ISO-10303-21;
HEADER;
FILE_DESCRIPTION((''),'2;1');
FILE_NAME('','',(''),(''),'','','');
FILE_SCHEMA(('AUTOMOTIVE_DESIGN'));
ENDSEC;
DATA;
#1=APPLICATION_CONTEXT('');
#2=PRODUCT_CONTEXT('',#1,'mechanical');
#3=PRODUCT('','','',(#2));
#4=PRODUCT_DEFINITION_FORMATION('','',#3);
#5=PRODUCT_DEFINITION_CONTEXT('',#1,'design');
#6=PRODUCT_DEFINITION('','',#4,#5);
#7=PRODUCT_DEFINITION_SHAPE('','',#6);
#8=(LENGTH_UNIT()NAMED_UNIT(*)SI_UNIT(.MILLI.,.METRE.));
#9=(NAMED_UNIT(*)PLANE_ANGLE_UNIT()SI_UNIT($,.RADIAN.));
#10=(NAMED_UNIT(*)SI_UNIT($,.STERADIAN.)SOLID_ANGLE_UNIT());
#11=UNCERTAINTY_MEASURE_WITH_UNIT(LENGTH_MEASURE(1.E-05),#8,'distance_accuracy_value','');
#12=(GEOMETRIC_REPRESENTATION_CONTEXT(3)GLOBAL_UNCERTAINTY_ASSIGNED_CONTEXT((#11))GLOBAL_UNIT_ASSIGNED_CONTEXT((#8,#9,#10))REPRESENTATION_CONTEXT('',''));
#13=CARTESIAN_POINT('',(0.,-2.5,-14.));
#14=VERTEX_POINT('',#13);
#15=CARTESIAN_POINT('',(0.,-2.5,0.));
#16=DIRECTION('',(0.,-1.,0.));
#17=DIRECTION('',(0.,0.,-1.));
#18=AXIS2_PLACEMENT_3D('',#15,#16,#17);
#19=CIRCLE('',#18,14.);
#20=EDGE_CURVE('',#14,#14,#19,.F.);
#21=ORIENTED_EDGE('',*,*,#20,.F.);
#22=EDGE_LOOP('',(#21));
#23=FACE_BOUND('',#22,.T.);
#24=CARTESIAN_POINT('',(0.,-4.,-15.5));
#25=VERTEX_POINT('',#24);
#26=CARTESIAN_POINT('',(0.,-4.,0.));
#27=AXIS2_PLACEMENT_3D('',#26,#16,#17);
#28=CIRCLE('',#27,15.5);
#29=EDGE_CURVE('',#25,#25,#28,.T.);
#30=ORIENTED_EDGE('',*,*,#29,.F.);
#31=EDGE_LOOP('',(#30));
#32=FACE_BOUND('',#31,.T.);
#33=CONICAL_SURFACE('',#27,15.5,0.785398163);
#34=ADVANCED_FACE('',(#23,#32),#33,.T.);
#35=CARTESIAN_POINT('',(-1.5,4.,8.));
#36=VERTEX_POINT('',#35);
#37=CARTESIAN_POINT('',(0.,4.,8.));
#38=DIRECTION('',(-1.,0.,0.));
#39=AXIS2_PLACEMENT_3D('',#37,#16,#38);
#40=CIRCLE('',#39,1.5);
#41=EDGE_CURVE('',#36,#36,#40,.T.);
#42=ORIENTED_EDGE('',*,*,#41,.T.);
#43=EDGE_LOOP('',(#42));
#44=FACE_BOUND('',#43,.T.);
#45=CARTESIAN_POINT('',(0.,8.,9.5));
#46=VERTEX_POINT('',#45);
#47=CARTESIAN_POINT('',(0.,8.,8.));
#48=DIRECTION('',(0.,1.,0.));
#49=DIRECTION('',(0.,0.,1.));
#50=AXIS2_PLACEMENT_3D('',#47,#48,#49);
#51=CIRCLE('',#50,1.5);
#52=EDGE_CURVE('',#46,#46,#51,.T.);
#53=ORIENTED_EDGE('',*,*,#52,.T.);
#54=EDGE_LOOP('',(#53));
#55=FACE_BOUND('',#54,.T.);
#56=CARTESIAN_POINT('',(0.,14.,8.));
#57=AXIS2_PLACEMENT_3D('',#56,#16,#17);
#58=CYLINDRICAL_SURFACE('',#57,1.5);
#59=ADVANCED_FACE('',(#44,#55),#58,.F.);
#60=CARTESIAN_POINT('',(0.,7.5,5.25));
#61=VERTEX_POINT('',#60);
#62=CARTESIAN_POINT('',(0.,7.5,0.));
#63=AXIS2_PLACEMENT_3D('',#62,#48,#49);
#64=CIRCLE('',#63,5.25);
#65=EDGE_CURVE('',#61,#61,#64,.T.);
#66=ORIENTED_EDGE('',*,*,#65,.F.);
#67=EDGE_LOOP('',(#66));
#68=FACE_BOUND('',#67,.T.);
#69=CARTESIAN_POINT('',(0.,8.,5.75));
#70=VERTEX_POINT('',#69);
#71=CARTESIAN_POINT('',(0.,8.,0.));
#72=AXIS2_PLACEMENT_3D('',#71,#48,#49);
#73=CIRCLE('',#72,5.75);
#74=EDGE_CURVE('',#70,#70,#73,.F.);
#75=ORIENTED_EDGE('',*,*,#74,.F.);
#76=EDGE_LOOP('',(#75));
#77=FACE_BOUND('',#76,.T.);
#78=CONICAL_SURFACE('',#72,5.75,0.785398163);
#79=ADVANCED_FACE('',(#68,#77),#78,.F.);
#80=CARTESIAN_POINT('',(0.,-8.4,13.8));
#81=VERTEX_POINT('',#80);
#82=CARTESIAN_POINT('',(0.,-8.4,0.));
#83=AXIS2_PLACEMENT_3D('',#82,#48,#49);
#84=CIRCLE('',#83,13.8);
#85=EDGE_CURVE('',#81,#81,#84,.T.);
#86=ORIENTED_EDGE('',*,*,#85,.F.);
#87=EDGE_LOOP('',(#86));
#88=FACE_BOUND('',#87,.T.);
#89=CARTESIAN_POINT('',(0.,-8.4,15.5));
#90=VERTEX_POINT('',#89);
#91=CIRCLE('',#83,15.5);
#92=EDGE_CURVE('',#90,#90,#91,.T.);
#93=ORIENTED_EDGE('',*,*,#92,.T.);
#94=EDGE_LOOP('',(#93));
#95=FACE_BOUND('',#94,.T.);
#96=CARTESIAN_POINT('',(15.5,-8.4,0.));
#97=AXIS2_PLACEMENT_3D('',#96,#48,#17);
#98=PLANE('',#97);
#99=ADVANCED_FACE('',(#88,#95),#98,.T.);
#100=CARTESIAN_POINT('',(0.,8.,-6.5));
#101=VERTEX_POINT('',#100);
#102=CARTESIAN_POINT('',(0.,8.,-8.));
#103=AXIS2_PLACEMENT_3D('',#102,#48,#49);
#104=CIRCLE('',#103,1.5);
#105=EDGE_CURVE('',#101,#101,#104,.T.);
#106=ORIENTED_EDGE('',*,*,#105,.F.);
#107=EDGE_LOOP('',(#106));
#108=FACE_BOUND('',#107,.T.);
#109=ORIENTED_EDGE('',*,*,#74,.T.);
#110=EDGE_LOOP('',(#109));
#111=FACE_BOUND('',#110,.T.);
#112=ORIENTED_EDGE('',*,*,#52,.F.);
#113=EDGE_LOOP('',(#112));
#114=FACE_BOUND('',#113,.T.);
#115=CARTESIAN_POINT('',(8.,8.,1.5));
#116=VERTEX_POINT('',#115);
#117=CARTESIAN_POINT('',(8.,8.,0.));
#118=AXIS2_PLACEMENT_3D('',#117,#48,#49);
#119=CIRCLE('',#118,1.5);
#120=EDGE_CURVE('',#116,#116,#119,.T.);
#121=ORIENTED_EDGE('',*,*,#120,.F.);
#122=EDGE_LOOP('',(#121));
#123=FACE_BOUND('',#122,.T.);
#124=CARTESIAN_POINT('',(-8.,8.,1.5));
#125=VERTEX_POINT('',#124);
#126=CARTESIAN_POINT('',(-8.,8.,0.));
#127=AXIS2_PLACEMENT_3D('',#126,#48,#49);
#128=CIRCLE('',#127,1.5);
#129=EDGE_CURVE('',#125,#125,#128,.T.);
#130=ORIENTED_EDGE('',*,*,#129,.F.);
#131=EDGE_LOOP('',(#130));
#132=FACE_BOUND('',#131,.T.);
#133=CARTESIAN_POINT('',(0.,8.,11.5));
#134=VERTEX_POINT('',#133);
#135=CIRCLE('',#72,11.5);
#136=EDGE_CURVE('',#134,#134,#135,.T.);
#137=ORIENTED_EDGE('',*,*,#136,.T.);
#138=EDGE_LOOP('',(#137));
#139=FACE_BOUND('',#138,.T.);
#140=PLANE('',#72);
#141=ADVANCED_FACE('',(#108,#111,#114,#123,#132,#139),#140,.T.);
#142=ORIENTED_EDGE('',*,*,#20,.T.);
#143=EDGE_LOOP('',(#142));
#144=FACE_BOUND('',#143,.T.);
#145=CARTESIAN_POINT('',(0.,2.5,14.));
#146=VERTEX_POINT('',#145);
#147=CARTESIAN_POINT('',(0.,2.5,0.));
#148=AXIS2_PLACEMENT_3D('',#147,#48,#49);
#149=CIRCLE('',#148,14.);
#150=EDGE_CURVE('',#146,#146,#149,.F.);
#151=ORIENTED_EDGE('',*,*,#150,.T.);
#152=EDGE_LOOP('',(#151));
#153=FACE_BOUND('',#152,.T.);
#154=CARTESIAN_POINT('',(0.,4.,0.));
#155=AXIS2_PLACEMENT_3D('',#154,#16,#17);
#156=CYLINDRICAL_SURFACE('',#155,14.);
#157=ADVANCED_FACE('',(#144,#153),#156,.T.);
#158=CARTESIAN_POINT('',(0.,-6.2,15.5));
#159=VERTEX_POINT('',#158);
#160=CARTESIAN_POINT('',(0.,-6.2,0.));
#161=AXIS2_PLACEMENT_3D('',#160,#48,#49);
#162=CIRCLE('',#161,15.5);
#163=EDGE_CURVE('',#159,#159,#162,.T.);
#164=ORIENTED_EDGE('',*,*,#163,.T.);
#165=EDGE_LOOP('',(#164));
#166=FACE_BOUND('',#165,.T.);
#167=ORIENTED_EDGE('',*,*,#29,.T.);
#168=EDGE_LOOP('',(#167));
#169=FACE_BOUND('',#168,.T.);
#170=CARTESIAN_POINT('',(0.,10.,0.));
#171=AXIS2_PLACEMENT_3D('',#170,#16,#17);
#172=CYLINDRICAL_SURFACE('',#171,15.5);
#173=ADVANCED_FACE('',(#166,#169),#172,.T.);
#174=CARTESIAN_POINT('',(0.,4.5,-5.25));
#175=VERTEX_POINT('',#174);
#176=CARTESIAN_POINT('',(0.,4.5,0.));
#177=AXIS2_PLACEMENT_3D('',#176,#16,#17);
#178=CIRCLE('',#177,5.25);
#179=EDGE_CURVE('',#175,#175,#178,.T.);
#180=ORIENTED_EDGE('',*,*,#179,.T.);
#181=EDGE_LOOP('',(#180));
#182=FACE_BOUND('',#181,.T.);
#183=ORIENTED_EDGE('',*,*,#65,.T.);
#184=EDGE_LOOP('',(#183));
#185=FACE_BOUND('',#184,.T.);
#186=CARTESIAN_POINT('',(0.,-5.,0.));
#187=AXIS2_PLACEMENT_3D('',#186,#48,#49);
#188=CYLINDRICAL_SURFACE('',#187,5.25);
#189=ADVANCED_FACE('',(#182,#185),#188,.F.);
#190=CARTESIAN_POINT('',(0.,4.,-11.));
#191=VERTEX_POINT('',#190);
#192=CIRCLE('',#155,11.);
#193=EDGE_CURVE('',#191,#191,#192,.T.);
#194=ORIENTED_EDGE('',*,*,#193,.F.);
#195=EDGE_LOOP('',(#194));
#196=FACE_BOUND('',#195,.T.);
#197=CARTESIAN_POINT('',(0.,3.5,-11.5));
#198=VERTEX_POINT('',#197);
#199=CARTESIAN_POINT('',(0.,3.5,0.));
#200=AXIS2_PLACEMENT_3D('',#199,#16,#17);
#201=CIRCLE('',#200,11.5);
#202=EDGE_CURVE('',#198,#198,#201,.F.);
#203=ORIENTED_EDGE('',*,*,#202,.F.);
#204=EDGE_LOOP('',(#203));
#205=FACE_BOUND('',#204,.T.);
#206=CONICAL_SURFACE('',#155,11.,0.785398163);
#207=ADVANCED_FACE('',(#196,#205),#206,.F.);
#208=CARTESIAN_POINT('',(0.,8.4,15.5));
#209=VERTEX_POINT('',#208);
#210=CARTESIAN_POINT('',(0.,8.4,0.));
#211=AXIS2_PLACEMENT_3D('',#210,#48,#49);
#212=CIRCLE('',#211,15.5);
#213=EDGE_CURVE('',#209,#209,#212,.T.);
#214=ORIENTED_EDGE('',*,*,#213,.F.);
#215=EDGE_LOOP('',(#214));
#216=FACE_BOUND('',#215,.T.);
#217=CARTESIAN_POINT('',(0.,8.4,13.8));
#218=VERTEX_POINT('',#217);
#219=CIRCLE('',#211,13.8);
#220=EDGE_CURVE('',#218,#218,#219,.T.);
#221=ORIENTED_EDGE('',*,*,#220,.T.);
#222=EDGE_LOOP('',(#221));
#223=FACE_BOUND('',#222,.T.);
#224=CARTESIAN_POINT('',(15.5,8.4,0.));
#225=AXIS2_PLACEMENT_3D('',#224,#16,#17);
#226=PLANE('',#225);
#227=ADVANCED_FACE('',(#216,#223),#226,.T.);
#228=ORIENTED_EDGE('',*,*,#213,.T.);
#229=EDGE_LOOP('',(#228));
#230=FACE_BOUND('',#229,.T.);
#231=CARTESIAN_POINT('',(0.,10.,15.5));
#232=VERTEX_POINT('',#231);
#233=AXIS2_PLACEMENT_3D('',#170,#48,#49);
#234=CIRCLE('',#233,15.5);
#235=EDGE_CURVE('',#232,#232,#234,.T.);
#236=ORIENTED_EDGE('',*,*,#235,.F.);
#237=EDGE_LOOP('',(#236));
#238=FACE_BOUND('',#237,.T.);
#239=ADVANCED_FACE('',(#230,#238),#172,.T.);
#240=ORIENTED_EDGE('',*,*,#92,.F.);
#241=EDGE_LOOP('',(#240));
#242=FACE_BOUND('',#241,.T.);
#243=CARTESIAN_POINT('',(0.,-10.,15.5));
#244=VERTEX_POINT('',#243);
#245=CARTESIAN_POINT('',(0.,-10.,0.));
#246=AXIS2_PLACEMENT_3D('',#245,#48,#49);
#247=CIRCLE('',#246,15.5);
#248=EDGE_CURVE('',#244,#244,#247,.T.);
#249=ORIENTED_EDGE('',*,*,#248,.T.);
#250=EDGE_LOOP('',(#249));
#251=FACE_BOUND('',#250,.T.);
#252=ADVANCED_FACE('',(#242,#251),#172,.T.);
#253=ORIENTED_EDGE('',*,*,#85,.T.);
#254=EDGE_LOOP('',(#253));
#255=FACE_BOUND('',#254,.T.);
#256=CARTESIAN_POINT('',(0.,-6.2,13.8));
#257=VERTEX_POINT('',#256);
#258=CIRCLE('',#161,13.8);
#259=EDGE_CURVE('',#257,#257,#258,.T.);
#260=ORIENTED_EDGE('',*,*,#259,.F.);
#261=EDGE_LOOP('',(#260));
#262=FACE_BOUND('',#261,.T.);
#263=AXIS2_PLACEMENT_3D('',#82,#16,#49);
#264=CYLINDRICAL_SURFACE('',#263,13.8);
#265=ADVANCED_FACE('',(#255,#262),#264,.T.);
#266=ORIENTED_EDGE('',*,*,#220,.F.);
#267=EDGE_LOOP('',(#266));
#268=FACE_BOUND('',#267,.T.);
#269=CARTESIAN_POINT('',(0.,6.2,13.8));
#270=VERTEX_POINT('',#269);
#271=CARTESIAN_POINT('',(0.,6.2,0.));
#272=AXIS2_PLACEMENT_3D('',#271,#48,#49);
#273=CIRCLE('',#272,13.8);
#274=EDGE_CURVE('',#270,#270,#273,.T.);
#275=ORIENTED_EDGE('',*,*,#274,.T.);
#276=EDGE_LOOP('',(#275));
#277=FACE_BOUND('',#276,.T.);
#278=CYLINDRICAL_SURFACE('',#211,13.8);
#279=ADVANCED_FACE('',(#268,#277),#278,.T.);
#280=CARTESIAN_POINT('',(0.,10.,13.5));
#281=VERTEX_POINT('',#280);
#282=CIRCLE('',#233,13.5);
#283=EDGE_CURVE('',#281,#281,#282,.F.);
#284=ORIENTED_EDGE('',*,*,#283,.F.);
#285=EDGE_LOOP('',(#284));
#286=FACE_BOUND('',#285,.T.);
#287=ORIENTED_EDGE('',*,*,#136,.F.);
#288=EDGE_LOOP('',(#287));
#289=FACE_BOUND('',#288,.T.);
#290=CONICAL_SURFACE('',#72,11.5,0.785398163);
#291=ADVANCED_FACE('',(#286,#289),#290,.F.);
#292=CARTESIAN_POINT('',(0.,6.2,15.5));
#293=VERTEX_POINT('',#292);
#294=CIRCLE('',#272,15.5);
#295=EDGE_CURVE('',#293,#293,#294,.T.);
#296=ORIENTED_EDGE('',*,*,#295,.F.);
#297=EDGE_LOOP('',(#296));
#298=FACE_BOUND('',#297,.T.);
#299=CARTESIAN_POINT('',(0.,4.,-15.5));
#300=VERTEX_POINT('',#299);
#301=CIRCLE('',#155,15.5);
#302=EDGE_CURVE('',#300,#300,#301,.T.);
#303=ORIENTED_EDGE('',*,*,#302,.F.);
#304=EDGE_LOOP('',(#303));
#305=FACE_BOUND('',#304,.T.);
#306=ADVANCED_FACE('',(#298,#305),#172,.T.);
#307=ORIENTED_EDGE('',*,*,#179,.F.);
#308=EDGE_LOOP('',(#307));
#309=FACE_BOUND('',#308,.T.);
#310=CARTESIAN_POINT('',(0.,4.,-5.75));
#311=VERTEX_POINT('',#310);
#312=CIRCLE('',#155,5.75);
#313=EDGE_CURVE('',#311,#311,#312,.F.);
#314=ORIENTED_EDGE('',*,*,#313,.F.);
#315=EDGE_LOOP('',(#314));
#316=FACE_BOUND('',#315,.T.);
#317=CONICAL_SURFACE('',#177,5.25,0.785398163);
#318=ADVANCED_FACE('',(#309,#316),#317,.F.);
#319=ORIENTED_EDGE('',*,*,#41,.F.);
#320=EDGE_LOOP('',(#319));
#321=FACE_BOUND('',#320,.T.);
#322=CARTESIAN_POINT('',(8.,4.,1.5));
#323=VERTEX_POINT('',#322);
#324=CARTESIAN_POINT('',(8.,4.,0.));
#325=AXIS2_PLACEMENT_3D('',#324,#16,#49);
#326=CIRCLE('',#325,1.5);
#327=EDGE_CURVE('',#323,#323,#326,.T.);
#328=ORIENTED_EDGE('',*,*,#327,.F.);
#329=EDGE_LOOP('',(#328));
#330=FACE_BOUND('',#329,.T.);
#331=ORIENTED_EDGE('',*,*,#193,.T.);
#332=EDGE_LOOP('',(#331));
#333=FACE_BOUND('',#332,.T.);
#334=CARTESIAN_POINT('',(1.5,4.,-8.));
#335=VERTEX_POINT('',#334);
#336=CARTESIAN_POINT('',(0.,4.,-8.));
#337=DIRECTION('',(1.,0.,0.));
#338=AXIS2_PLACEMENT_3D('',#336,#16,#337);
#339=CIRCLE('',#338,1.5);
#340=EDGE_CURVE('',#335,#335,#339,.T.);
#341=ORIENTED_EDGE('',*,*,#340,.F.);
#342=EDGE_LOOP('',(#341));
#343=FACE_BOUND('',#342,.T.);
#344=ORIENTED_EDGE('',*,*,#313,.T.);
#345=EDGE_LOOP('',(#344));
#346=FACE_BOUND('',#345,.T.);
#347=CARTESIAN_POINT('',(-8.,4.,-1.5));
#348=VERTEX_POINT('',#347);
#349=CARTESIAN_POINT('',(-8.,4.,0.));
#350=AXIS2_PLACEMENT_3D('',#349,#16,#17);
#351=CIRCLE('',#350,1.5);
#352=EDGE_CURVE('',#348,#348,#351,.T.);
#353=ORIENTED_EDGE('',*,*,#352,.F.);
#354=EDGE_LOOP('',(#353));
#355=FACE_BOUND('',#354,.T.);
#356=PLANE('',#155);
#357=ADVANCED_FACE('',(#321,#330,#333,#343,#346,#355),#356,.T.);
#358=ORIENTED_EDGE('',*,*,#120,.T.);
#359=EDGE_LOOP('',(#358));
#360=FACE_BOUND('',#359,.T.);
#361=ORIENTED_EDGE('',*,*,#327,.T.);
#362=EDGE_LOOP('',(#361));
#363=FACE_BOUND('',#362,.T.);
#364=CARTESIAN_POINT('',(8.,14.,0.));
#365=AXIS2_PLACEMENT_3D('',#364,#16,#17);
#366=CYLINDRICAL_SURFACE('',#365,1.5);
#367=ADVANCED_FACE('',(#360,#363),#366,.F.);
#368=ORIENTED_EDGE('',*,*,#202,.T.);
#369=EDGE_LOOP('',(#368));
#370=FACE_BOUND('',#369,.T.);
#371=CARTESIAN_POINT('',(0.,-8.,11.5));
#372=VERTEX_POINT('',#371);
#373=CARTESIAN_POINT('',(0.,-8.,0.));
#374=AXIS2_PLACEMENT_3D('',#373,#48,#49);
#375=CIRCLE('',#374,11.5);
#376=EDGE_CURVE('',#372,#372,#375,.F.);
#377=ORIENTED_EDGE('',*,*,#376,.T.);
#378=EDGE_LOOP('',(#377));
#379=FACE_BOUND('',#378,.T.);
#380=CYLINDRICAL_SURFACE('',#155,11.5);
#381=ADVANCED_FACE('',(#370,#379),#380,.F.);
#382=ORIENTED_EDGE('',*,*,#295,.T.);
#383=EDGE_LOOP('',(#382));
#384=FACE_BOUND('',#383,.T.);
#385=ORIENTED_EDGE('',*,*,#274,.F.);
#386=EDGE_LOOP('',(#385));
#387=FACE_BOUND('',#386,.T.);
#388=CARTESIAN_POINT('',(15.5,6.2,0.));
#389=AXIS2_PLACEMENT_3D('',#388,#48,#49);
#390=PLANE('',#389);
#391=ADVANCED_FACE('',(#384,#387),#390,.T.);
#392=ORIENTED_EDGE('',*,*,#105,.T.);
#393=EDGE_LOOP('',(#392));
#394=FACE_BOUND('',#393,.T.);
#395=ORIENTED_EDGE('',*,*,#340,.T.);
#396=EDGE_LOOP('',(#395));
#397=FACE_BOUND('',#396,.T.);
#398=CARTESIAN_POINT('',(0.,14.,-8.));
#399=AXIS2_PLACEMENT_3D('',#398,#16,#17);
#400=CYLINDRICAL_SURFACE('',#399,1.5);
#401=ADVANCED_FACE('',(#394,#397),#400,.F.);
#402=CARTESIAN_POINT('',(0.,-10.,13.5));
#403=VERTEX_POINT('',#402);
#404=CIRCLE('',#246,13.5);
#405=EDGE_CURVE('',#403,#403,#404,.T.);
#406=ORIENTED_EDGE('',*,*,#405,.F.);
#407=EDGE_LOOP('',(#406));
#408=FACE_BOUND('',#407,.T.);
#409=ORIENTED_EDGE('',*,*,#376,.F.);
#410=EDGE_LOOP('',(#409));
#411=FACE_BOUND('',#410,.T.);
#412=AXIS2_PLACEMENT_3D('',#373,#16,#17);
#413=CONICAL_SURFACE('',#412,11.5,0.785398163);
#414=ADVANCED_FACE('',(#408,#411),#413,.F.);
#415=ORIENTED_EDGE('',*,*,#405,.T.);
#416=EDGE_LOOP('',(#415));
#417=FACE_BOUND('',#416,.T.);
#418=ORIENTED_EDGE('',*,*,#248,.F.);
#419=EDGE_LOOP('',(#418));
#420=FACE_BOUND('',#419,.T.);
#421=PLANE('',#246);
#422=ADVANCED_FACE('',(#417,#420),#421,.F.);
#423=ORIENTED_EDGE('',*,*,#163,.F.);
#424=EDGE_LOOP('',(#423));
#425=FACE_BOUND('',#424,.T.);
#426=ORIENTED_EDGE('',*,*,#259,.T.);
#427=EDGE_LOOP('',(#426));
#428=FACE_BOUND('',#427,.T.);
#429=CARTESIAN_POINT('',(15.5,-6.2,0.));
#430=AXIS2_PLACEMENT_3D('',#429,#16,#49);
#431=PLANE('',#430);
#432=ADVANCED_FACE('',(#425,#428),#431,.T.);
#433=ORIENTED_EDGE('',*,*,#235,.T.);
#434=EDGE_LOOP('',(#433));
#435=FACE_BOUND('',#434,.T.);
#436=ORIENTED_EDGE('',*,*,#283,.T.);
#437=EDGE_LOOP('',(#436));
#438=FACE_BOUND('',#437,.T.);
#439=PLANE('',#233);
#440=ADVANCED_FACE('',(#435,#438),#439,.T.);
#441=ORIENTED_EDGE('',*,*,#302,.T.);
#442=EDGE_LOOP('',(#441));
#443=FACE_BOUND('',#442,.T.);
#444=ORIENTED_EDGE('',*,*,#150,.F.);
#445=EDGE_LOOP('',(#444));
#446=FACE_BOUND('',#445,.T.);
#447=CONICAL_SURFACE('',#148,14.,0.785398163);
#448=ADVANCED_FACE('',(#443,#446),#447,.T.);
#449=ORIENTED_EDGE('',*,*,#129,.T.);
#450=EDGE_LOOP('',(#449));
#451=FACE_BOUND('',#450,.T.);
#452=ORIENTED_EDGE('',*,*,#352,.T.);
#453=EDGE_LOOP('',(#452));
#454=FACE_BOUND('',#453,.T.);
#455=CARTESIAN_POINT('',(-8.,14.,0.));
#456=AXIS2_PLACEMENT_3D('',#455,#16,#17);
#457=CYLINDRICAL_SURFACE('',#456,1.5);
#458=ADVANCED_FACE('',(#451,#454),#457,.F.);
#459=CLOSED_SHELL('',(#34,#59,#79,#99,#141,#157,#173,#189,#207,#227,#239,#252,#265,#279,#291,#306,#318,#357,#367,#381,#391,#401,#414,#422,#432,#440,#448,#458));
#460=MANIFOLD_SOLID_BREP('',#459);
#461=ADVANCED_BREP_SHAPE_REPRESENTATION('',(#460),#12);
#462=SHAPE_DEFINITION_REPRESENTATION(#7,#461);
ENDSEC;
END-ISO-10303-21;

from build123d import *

# Parameters (mm, degrees)
SKETCH_1_R               = 15.5
EXTRUDE_1_DEPTH          = 10
SKETCH_2_W               = 1.7
SKETCH_2_H               = 2.2
SKETCH_4_R               = 11.5
CUT_EXTRUDE_1_DEPTH      = 14
SKETCH_5_R               = 5.25
CUT_EXTRUDE_2_DEPTH      = 15
CHAMFER_1_SIZE           = 2
CUT_EXTRUDE_START        = -2
SKETCH_6_R               = 11.5
SKETCH_6_R_2             = 5
CUT_EXTRUDE_3_DEPTH      = 2
CHAMFER_2_SIZE           = 2
SKETCH_8_R               = 1.5
CUT_EXTRUDE_4_DEPTH      = 10
PATTERN_CIRCULAR_1_COUNT = 4
SKETCH_7_W               = 1.5
SKETCH_7_H               = 8
CHAMFER_5_SIZE           = 1.5
CHAMFER_4_SIZE           = 0.5


with BuildPart() as part:
    # 草图1 → 凸台-拉伸1 (new, symmetric)
    with BuildSketch(Plane(origin=(0, 0, 0), x_dir=(1, 0, 0), z_dir=(0, 1, 0))):
        with Locations(Location((0, 0, 0), (0, 0, 270))):
            Circle(SKETCH_1_R)
    extrude(amount=EXTRUDE_1_DEPTH, both=True)

    # 草图2 → 切除-旋转1 (revolve, cut)
    with BuildSketch(Plane.XY, mode=Mode.PRIVATE) as cut_revolve_1_sk:
        with Locations((14.65, 7.3)):
            Rectangle(SKETCH_2_W, SKETCH_2_H)
    cut_revolve_1 = revolve(cut_revolve_1_sk.sketch.rotate(Axis((0, 8.4, 0), (0, -1, 0)), 90), axis=Axis((0, 8.4, 0), (0, -1, 0)), mode=Mode.SUBTRACT)

    # 镜向1: 切除-旋转1 across plane
    add(cut_revolve_1.mirror(Plane.ZX), mode=Mode.SUBTRACT)

    # 草图4 → 切除-拉伸1 (cut)
    with BuildSketch(Plane.XZ.offset(10)):
        with Locations(Location((0, 0, 0), (0, 0, 270))):
            Circle(SKETCH_4_R)
    extrude(amount=-CUT_EXTRUDE_1_DEPTH, mode=Mode.SUBTRACT)

    # 草图5 → 切除-拉伸2 (cut)
    with BuildSketch(Plane(origin=(0, 10, 0), x_dir=(1, 0, 0), z_dir=(0, 1, 0))):
        with Locations(Location((0, 0, 0), (0, 0, 270))):
            Circle(SKETCH_5_R)
    extrude(amount=-CUT_EXTRUDE_2_DEPTH, mode=Mode.SUBTRACT)

    # 倒角1
    chamfer_1_edges = [part.edges().sort_by_distance(p)[0] for p in [
        (0, -10, 11.5),
    ]]
    chamfer(chamfer_1_edges, length=CHAMFER_1_SIZE)

    # 草图6 → 切除-拉伸3 (cut)
    with BuildSketch(Plane(origin=(0, 10, 0), x_dir=(1, 0, 0), z_dir=(0, 1, 0)).offset(CUT_EXTRUDE_START)):
        with Locations(Location((0, 0, 0), (0, 0, 90))):
            Circle(SKETCH_6_R)
        Circle(SKETCH_6_R_2, mode=Mode.SUBTRACT)
    extrude(amount=CUT_EXTRUDE_3_DEPTH, mode=Mode.SUBTRACT)

    # 倒角2
    chamfer_2_edges = [part.edges().sort_by_distance(p)[0] for p in [
        (0, 10, 11.5),
    ]]
    chamfer(chamfer_2_edges, length=CHAMFER_2_SIZE - 0.0001)  # a hair under: the kernel refuses the full size

    # 草图8 → 切除-拉伸4 (cut)
    with BuildSketch(Plane.XZ.offset(-4)):
        with Locations(Location((-8, 0, 0), (0, 0, 270))):
            Circle(SKETCH_8_R)
    cut_extrude_4 = extrude(amount=-CUT_EXTRUDE_4_DEPTH, mode=Mode.SUBTRACT)

    # 阵列(圆周)1: 切除-拉伸4 ×4 about axis
    pattern_circular_1_axis = Axis((0, 0, 0), (0, 1, 0))
    for i in range(1, PATTERN_CIRCULAR_1_COUNT):
        add(cut_extrude_4.rotate(pattern_circular_1_axis, i * 360 / PATTERN_CIRCULAR_1_COUNT), mode=Mode.SUBTRACT)

    # 草图7 → 切除-旋转2 (revolve, cut)
    with BuildSketch(Plane(origin=(0, 0, 0), x_dir=(0, 0, -1), z_dir=(1, 0, 0))):
        with Locations((14.75, 0)):
            Rectangle(SKETCH_7_W, SKETCH_7_H)
    revolve(axis=Axis((0, 4, 0), (0, 1, 0)), mode=Mode.SUBTRACT)

    # 倒角5
    chamfer_5_edges = [part.edges().sort_by_distance(p)[0] for p in [
        (0, -4, 14),
        (0, 4, 14),
    ]]
    chamfer(chamfer_5_edges, length=CHAMFER_5_SIZE - 0.0001)  # a hair under: the kernel refuses the full size

    # 倒角4
    chamfer_4_edges = [part.edges().sort_by_distance(p)[0] for p in [
        (0, 4, 11.5),
        (0, 4, -5.25),
        (0, 8, -5.25),
    ]]
    chamfer(chamfer_4_edges, length=CHAMFER_4_SIZE)


solid = part.part
